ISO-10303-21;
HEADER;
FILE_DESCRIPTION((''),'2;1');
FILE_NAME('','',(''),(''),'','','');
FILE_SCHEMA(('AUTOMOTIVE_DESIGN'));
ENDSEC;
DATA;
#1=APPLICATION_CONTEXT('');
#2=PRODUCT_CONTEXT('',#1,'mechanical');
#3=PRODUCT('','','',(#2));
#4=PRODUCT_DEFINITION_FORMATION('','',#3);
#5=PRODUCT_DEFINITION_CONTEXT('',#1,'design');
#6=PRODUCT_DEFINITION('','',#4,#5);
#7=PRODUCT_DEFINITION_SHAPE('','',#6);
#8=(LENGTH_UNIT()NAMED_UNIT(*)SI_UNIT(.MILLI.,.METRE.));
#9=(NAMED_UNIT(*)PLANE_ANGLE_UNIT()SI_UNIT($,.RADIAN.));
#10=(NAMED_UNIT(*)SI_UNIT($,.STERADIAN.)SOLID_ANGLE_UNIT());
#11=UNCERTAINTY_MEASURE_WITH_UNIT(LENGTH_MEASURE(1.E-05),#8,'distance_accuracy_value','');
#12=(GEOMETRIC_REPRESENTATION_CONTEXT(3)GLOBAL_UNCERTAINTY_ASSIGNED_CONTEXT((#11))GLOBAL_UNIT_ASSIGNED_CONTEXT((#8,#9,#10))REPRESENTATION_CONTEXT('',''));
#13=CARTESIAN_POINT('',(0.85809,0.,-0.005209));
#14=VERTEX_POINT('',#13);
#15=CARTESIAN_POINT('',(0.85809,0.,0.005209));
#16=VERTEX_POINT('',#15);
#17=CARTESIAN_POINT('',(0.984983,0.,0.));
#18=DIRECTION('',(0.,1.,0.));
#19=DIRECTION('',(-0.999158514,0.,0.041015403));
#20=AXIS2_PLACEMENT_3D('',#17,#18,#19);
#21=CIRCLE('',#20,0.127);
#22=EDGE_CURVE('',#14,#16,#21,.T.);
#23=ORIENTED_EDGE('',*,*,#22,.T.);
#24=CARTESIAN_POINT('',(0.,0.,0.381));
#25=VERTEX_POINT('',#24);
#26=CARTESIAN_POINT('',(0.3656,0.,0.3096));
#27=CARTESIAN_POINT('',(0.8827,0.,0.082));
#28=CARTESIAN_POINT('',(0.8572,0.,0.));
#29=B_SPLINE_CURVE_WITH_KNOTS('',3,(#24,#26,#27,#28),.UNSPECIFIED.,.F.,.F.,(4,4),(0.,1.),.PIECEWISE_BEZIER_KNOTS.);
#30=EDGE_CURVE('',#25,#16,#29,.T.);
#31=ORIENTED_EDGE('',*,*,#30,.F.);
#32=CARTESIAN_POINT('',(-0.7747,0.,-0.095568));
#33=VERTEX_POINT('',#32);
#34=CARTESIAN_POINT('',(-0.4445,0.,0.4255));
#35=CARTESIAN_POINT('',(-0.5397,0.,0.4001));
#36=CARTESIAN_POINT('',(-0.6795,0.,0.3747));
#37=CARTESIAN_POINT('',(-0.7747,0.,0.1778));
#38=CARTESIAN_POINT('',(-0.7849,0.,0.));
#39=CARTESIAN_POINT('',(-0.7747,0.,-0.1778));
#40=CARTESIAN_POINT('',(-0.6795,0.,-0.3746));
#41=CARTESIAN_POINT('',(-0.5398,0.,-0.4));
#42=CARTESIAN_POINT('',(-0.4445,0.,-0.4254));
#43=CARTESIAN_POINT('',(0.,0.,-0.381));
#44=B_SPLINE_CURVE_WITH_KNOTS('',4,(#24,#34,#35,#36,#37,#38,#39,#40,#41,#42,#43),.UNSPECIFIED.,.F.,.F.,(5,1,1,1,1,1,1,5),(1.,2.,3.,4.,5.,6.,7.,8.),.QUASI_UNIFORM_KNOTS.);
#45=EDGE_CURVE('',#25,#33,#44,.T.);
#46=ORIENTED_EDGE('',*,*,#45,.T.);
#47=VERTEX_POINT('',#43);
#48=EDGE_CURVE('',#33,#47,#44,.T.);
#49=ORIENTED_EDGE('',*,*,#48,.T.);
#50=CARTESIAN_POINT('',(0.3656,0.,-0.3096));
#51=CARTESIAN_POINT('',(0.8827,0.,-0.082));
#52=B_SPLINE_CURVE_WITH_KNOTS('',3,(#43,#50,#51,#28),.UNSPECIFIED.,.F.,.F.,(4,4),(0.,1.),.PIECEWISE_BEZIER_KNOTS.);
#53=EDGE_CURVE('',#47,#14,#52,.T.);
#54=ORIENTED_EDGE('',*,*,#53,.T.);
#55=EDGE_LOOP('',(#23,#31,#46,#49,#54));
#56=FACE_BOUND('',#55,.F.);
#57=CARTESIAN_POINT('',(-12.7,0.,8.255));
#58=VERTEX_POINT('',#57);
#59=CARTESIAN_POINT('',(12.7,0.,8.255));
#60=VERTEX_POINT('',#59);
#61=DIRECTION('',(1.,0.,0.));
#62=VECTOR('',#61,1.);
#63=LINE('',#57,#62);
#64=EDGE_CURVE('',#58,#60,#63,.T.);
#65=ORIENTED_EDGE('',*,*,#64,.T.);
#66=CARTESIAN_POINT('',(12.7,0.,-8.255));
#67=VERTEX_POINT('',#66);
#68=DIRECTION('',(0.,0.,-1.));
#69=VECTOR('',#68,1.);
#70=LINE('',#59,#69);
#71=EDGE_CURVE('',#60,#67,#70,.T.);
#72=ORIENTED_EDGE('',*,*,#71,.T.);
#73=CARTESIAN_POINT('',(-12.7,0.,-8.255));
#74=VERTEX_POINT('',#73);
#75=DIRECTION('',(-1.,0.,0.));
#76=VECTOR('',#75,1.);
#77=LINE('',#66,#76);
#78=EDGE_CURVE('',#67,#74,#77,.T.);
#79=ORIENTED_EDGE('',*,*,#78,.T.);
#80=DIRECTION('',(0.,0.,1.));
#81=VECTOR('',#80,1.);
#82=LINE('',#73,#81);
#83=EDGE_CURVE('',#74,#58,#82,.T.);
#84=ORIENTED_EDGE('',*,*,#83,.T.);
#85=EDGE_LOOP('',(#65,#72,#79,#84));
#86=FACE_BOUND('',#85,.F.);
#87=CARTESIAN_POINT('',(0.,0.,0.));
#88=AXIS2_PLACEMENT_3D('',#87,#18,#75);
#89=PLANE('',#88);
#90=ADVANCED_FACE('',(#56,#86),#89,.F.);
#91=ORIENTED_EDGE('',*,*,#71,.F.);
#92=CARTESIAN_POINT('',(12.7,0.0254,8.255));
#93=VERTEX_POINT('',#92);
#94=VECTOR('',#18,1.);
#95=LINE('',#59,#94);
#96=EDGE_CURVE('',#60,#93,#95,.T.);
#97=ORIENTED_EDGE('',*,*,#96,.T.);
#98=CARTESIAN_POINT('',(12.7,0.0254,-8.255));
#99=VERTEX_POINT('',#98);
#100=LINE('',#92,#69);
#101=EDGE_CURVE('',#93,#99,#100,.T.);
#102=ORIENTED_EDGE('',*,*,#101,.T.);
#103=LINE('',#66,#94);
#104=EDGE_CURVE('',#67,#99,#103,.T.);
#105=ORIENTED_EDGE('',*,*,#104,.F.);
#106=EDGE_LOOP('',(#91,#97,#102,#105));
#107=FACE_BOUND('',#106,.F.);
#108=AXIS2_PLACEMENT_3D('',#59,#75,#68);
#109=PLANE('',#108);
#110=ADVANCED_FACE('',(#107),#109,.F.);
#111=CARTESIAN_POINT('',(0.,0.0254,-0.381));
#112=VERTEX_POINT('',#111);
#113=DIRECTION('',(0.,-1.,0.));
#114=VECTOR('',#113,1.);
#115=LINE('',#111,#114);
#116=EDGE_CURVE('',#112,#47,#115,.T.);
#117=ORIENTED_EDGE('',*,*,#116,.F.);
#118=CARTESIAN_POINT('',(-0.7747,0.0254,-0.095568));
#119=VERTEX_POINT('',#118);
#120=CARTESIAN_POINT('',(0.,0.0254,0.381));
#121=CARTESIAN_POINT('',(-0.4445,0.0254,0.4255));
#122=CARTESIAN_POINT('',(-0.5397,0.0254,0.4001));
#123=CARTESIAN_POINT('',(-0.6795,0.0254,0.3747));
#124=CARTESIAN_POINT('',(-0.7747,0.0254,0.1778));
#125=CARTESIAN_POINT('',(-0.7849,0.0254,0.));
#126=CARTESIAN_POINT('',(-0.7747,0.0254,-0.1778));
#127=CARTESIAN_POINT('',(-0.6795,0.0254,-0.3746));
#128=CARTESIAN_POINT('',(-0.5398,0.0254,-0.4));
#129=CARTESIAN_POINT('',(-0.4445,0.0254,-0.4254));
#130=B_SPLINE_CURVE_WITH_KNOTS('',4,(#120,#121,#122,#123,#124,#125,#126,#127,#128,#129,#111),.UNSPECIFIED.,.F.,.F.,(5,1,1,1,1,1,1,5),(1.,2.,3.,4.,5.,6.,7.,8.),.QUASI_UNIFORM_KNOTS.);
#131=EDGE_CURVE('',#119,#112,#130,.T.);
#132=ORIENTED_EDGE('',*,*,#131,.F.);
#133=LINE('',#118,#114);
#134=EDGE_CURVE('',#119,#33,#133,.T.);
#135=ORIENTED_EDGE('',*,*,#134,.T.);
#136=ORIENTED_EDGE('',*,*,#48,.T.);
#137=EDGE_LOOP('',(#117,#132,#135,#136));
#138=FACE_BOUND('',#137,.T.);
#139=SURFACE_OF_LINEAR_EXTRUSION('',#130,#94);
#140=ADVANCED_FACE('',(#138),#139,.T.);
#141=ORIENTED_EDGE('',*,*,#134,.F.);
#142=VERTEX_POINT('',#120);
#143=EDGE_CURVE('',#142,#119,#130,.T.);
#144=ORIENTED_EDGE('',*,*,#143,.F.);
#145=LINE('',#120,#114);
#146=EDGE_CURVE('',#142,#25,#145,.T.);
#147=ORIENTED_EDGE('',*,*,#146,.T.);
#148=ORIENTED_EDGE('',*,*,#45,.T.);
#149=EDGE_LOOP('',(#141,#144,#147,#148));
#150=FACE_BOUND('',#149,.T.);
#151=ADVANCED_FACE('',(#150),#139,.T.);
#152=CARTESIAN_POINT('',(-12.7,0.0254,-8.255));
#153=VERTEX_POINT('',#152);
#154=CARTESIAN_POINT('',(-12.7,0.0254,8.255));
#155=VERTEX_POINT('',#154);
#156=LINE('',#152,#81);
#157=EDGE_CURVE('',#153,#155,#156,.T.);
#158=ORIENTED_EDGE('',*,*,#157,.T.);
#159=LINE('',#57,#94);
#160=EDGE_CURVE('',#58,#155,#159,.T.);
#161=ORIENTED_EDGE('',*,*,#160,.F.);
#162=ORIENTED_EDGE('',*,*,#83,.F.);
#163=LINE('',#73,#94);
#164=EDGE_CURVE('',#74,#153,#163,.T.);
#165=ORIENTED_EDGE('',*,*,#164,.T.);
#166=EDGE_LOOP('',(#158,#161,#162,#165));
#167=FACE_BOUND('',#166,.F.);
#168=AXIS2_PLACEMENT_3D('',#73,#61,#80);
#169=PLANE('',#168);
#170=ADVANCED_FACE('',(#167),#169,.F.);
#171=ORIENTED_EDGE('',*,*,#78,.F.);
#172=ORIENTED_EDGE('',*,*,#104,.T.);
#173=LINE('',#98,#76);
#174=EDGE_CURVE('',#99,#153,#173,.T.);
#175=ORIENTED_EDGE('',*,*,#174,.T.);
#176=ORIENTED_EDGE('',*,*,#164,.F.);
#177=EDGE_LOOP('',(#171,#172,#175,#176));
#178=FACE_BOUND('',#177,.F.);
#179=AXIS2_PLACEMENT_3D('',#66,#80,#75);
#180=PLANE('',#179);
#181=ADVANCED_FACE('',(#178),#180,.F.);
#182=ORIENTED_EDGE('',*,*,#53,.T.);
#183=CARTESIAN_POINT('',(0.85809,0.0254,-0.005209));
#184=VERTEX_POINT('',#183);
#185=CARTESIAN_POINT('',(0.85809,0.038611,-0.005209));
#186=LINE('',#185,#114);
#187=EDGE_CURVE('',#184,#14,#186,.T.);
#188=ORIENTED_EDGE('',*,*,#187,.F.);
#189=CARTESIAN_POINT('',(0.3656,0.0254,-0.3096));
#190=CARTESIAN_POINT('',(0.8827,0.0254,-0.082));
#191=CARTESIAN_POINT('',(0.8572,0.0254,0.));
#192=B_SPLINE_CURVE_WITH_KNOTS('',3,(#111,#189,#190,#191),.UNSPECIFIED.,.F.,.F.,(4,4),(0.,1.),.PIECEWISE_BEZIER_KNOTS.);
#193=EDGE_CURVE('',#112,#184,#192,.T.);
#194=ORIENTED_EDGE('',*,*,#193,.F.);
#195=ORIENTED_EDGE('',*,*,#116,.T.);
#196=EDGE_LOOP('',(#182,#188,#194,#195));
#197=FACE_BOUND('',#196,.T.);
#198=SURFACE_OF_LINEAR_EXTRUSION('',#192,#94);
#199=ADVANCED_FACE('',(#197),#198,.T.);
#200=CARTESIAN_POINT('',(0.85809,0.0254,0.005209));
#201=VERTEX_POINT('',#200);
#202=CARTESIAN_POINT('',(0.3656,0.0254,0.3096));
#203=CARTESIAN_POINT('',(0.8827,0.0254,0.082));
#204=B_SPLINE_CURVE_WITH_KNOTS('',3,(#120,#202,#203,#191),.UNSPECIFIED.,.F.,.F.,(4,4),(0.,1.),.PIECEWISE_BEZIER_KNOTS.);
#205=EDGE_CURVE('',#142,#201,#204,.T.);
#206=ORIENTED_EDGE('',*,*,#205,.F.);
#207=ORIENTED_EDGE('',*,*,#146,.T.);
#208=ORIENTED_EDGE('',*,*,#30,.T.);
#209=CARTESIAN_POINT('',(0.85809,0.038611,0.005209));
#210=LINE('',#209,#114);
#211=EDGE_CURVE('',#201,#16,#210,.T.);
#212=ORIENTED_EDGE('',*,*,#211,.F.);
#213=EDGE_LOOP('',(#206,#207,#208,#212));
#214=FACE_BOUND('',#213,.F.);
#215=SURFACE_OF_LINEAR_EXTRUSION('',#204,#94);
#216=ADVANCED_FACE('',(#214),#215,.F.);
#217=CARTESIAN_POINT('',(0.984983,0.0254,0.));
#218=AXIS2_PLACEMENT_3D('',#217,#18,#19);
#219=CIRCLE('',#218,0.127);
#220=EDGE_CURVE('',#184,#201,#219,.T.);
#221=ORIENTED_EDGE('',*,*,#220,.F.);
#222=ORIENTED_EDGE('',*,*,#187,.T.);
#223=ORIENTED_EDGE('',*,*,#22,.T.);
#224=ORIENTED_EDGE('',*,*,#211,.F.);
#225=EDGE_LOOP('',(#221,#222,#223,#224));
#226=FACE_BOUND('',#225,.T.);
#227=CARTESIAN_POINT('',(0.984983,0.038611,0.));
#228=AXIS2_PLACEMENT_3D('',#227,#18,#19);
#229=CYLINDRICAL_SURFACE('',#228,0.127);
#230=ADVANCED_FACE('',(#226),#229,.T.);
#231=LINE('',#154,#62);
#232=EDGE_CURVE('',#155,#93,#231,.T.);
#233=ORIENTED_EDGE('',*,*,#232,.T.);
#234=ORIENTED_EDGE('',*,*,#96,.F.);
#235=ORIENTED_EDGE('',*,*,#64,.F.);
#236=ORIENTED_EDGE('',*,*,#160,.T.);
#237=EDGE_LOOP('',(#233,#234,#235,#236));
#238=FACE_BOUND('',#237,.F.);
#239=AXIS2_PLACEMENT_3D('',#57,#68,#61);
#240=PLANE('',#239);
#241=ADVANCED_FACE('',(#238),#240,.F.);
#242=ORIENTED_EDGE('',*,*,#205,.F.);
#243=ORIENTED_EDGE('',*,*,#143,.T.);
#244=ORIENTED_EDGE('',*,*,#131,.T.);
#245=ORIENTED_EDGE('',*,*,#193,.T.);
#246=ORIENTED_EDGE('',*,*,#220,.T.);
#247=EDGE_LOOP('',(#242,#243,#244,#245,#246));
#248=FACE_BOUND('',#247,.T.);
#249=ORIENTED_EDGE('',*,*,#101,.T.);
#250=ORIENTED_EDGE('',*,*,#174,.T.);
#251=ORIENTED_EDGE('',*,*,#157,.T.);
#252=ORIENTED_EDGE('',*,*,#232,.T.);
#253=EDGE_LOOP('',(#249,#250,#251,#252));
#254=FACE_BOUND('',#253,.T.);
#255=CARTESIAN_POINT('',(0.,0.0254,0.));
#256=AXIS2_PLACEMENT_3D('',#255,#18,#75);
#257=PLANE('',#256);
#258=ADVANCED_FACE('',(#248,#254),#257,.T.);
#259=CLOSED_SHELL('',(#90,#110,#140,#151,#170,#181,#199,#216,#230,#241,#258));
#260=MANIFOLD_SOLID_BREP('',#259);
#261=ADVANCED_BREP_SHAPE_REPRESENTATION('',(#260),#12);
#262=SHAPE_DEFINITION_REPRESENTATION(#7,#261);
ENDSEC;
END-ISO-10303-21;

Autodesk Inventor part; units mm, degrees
ref_plane "YZ Plane" through (0, 0, 0) normal (1, 0, 0) x (0, 1, 0)
ref_plane "XZ Plane" through (0, 0, 0) normal (0, 1, 0) x (-1, 0, 0)
ref_plane "XY Plane" through (0, 0, 0) normal (0, 0, 1) x (1, 0, 0)
sketch "stock_cut_for_holder" plane through (0, 0, 0) normal (0, 1, 0) x (-1, 0, 0)
  line L0 (-12.7, -8.255) -> (12.7, -8.255)
  line L1 (12.7, -8.255) -> (12.7, 8.255)
  line L2 (12.7, 8.255) -> (-12.7, 8.255)
  line L3 (-12.7, 8.255) -> (-12.7, -8.255)
  line L4 (-12.7, -8.255) -> (12.7, 8.255) construction
  line L5 (12.7, -8.255) -> (-12.7, 8.255) construction
  point P0 (0, 0)
  dimension "cut_shim_height" = 25.4
  dimension "cut_shim_width" = 16.51
extrude "Plate1" add sketch "stock_cut_for_holder" along normal blind 0.0254
sketch "mill_path" plane through (0, 0.0254, 0) normal (0, 1, 0) x (1, 0, 0)
  line L0 (12.7, 8.255) -> (12.7, -8.255) projected
  line L1 (-12.7, 8.255) -> (12.7, 8.255) projected
  line L2 (-12.7, -8.255) -> (-12.7, 8.255) projected
  line L3 (12.7, -8.255) -> (-12.7, -8.255) projected
  line L4 (-12.7, 8.255) -> (-12.7, -8.255) projected
  line L5 (-12.7, 0) -> (12.7, 0) construction
  line L6 (12.7, -8.255) -> (12.7, 8.255) projected
  line L7 (0, 0) -> (0, -0.381) construction
  line L8 (0, 0) -> (0, 0.381) construction
  line L9 (-0.4445, 0) -> (-0.4445, -0.4255) construction
  line L10 (-0.4445, 0) -> (-0.4445, 0.4254) construction
  line L11 (0.5842, 0) -> (0.5842, -0.1905) construction
  line L12 (-0.6795, 0) -> (-0.6795, -0.3747) construction
  line L13 (0.5842, 0) -> (0.5842, 0.1905) construction
  line L14 (-0.6795, 0) -> (-0.6795, 0.3746) construction
  line L15 (-0.5398, 0) -> (-0.5397, -0.4001) construction
  line L16 (-0.5398, 0) -> (-0.5398, 0.4) construction
  line L17 (0.5842, 0) -> (0.5842, 0.1905) construction
  line L18 (-0.7747, 0) -> (-0.7747, -0.1778) construction
  line L19 (-0.7747, 0) -> (-0.7747, 0.1778)
  line L20 (0.8382, 0) -> (0.8382, -0.0419) construction
  line L21 (0.8382, 0) -> (0.8382, 0.0419) construction
  spline S0 degree 3 poles (0, -0.381) (0.3656, -0.3096) (0.8827, -0.082) (0.8572, 0) knots 0 0 0 0 1 1 1 1
  spline S1 degree 3 poles (0, 0.381) (0.3656, 0.3096) (0.8827, 0.082) (0.8572, 0) knots 0 0 0 0 1 1 1 1
  line L22 (0, -0.381) -> (-0.4445, -0.4255) construction
  line L23 (-0.4445, -0.4255) -> (-0.5397, -0.4001) construction
  line L24 (-0.5397, -0.4001) -> (-0.6795, -0.3747) construction
  line L25 (-0.6795, -0.3747) -> (-0.7747, -0.1778) construction
  line L26 (-0.7747, -0.1778) -> (-0.7849, 0) construction
  line L27 (-0.7849, 0) -> (-0.7747, 0.1778) construction
  line L28 (-0.7747, 0.1778) -> (-0.6795, 0.3746) construction
  line L29 (-0.6795, 0.3746) -> (-0.5398, 0.4) construction
  line L30 (-0.5398, 0.4) -> (-0.4445, 0.4254) construction
  line L31 (-0.4445, 0.4254) -> (0, 0.381) construction
  spline S2 degree 4 poles (0, -0.381) (-0.4445, -0.4255) (-0.5397, -0.4001) (-0.6795, -0.3747) (-0.7747, -0.1778) (-0.7849, 0) (-0.7747, 0.1778) (-0.6795, 0.3746) (-0.5398, 0.4) (-0.4445, 0.4254) (0, 0.381) knots 1 1 1 1 1 2 3 4 5 6 7 8 8 8 8 8
  dimension "half_mid_thorax_width" = 0.381
  dimension "mid_thorax_to_prescutum" = 0.4445
  dimension "w2" = 0.4254
  dimension "d9" = 0.1905
  dimension "mid_thorax_to_anterior_scutellum" = 0.5842
  dimension "d11" = 0.3746
  dimension "d13" = 0.4001
  dimension "head_thorax" = 0.0953
  dimension "d15" = 0.1397
  dimension "d17" = 0.1778
  dimension "d18" = 0.0953
  dimension "scutellum_taper" = 0.254
  dimension "d20" = 0.0419
  dimension "d21" = 0.0191
  dimension "d22" = 0.0102
  dimension "d24" = 0.3302
  dimension "d25" = 1.6421
extrude "milled_hole" cut sketch "mill_path" against normal blind 0.0254 contours S2 S1 S0
fillet "Corner Round1" radius 0.127 1 edges at (0.8572, 0.0127, 0)
equation "\"d26\" = Thickness"
equation "\"BendRadius\" = Thickness"
equation "\"BendReliefWidth\" = Thickness"
equation "\"BendReliefDepth\" = 0.5 * Thickness"
equation "\"CornerReliefSize\" = 4 * Thickness"
equation "\"MinimumRemnant\" = 2 * Thickness"
equation "\"TransitionRadius\" = BendRadius"
equation "\"JacobiRadiusSize\" = BendRadius"
equation "\"GapSize\" = Thickness"
equation "\"d2\" = BendRadius"
equation "\"Thickness\" = 0.0254"
properties part number "antennal_lobe_sheet_model_v03" material "Stainless Steel AISI 317"
